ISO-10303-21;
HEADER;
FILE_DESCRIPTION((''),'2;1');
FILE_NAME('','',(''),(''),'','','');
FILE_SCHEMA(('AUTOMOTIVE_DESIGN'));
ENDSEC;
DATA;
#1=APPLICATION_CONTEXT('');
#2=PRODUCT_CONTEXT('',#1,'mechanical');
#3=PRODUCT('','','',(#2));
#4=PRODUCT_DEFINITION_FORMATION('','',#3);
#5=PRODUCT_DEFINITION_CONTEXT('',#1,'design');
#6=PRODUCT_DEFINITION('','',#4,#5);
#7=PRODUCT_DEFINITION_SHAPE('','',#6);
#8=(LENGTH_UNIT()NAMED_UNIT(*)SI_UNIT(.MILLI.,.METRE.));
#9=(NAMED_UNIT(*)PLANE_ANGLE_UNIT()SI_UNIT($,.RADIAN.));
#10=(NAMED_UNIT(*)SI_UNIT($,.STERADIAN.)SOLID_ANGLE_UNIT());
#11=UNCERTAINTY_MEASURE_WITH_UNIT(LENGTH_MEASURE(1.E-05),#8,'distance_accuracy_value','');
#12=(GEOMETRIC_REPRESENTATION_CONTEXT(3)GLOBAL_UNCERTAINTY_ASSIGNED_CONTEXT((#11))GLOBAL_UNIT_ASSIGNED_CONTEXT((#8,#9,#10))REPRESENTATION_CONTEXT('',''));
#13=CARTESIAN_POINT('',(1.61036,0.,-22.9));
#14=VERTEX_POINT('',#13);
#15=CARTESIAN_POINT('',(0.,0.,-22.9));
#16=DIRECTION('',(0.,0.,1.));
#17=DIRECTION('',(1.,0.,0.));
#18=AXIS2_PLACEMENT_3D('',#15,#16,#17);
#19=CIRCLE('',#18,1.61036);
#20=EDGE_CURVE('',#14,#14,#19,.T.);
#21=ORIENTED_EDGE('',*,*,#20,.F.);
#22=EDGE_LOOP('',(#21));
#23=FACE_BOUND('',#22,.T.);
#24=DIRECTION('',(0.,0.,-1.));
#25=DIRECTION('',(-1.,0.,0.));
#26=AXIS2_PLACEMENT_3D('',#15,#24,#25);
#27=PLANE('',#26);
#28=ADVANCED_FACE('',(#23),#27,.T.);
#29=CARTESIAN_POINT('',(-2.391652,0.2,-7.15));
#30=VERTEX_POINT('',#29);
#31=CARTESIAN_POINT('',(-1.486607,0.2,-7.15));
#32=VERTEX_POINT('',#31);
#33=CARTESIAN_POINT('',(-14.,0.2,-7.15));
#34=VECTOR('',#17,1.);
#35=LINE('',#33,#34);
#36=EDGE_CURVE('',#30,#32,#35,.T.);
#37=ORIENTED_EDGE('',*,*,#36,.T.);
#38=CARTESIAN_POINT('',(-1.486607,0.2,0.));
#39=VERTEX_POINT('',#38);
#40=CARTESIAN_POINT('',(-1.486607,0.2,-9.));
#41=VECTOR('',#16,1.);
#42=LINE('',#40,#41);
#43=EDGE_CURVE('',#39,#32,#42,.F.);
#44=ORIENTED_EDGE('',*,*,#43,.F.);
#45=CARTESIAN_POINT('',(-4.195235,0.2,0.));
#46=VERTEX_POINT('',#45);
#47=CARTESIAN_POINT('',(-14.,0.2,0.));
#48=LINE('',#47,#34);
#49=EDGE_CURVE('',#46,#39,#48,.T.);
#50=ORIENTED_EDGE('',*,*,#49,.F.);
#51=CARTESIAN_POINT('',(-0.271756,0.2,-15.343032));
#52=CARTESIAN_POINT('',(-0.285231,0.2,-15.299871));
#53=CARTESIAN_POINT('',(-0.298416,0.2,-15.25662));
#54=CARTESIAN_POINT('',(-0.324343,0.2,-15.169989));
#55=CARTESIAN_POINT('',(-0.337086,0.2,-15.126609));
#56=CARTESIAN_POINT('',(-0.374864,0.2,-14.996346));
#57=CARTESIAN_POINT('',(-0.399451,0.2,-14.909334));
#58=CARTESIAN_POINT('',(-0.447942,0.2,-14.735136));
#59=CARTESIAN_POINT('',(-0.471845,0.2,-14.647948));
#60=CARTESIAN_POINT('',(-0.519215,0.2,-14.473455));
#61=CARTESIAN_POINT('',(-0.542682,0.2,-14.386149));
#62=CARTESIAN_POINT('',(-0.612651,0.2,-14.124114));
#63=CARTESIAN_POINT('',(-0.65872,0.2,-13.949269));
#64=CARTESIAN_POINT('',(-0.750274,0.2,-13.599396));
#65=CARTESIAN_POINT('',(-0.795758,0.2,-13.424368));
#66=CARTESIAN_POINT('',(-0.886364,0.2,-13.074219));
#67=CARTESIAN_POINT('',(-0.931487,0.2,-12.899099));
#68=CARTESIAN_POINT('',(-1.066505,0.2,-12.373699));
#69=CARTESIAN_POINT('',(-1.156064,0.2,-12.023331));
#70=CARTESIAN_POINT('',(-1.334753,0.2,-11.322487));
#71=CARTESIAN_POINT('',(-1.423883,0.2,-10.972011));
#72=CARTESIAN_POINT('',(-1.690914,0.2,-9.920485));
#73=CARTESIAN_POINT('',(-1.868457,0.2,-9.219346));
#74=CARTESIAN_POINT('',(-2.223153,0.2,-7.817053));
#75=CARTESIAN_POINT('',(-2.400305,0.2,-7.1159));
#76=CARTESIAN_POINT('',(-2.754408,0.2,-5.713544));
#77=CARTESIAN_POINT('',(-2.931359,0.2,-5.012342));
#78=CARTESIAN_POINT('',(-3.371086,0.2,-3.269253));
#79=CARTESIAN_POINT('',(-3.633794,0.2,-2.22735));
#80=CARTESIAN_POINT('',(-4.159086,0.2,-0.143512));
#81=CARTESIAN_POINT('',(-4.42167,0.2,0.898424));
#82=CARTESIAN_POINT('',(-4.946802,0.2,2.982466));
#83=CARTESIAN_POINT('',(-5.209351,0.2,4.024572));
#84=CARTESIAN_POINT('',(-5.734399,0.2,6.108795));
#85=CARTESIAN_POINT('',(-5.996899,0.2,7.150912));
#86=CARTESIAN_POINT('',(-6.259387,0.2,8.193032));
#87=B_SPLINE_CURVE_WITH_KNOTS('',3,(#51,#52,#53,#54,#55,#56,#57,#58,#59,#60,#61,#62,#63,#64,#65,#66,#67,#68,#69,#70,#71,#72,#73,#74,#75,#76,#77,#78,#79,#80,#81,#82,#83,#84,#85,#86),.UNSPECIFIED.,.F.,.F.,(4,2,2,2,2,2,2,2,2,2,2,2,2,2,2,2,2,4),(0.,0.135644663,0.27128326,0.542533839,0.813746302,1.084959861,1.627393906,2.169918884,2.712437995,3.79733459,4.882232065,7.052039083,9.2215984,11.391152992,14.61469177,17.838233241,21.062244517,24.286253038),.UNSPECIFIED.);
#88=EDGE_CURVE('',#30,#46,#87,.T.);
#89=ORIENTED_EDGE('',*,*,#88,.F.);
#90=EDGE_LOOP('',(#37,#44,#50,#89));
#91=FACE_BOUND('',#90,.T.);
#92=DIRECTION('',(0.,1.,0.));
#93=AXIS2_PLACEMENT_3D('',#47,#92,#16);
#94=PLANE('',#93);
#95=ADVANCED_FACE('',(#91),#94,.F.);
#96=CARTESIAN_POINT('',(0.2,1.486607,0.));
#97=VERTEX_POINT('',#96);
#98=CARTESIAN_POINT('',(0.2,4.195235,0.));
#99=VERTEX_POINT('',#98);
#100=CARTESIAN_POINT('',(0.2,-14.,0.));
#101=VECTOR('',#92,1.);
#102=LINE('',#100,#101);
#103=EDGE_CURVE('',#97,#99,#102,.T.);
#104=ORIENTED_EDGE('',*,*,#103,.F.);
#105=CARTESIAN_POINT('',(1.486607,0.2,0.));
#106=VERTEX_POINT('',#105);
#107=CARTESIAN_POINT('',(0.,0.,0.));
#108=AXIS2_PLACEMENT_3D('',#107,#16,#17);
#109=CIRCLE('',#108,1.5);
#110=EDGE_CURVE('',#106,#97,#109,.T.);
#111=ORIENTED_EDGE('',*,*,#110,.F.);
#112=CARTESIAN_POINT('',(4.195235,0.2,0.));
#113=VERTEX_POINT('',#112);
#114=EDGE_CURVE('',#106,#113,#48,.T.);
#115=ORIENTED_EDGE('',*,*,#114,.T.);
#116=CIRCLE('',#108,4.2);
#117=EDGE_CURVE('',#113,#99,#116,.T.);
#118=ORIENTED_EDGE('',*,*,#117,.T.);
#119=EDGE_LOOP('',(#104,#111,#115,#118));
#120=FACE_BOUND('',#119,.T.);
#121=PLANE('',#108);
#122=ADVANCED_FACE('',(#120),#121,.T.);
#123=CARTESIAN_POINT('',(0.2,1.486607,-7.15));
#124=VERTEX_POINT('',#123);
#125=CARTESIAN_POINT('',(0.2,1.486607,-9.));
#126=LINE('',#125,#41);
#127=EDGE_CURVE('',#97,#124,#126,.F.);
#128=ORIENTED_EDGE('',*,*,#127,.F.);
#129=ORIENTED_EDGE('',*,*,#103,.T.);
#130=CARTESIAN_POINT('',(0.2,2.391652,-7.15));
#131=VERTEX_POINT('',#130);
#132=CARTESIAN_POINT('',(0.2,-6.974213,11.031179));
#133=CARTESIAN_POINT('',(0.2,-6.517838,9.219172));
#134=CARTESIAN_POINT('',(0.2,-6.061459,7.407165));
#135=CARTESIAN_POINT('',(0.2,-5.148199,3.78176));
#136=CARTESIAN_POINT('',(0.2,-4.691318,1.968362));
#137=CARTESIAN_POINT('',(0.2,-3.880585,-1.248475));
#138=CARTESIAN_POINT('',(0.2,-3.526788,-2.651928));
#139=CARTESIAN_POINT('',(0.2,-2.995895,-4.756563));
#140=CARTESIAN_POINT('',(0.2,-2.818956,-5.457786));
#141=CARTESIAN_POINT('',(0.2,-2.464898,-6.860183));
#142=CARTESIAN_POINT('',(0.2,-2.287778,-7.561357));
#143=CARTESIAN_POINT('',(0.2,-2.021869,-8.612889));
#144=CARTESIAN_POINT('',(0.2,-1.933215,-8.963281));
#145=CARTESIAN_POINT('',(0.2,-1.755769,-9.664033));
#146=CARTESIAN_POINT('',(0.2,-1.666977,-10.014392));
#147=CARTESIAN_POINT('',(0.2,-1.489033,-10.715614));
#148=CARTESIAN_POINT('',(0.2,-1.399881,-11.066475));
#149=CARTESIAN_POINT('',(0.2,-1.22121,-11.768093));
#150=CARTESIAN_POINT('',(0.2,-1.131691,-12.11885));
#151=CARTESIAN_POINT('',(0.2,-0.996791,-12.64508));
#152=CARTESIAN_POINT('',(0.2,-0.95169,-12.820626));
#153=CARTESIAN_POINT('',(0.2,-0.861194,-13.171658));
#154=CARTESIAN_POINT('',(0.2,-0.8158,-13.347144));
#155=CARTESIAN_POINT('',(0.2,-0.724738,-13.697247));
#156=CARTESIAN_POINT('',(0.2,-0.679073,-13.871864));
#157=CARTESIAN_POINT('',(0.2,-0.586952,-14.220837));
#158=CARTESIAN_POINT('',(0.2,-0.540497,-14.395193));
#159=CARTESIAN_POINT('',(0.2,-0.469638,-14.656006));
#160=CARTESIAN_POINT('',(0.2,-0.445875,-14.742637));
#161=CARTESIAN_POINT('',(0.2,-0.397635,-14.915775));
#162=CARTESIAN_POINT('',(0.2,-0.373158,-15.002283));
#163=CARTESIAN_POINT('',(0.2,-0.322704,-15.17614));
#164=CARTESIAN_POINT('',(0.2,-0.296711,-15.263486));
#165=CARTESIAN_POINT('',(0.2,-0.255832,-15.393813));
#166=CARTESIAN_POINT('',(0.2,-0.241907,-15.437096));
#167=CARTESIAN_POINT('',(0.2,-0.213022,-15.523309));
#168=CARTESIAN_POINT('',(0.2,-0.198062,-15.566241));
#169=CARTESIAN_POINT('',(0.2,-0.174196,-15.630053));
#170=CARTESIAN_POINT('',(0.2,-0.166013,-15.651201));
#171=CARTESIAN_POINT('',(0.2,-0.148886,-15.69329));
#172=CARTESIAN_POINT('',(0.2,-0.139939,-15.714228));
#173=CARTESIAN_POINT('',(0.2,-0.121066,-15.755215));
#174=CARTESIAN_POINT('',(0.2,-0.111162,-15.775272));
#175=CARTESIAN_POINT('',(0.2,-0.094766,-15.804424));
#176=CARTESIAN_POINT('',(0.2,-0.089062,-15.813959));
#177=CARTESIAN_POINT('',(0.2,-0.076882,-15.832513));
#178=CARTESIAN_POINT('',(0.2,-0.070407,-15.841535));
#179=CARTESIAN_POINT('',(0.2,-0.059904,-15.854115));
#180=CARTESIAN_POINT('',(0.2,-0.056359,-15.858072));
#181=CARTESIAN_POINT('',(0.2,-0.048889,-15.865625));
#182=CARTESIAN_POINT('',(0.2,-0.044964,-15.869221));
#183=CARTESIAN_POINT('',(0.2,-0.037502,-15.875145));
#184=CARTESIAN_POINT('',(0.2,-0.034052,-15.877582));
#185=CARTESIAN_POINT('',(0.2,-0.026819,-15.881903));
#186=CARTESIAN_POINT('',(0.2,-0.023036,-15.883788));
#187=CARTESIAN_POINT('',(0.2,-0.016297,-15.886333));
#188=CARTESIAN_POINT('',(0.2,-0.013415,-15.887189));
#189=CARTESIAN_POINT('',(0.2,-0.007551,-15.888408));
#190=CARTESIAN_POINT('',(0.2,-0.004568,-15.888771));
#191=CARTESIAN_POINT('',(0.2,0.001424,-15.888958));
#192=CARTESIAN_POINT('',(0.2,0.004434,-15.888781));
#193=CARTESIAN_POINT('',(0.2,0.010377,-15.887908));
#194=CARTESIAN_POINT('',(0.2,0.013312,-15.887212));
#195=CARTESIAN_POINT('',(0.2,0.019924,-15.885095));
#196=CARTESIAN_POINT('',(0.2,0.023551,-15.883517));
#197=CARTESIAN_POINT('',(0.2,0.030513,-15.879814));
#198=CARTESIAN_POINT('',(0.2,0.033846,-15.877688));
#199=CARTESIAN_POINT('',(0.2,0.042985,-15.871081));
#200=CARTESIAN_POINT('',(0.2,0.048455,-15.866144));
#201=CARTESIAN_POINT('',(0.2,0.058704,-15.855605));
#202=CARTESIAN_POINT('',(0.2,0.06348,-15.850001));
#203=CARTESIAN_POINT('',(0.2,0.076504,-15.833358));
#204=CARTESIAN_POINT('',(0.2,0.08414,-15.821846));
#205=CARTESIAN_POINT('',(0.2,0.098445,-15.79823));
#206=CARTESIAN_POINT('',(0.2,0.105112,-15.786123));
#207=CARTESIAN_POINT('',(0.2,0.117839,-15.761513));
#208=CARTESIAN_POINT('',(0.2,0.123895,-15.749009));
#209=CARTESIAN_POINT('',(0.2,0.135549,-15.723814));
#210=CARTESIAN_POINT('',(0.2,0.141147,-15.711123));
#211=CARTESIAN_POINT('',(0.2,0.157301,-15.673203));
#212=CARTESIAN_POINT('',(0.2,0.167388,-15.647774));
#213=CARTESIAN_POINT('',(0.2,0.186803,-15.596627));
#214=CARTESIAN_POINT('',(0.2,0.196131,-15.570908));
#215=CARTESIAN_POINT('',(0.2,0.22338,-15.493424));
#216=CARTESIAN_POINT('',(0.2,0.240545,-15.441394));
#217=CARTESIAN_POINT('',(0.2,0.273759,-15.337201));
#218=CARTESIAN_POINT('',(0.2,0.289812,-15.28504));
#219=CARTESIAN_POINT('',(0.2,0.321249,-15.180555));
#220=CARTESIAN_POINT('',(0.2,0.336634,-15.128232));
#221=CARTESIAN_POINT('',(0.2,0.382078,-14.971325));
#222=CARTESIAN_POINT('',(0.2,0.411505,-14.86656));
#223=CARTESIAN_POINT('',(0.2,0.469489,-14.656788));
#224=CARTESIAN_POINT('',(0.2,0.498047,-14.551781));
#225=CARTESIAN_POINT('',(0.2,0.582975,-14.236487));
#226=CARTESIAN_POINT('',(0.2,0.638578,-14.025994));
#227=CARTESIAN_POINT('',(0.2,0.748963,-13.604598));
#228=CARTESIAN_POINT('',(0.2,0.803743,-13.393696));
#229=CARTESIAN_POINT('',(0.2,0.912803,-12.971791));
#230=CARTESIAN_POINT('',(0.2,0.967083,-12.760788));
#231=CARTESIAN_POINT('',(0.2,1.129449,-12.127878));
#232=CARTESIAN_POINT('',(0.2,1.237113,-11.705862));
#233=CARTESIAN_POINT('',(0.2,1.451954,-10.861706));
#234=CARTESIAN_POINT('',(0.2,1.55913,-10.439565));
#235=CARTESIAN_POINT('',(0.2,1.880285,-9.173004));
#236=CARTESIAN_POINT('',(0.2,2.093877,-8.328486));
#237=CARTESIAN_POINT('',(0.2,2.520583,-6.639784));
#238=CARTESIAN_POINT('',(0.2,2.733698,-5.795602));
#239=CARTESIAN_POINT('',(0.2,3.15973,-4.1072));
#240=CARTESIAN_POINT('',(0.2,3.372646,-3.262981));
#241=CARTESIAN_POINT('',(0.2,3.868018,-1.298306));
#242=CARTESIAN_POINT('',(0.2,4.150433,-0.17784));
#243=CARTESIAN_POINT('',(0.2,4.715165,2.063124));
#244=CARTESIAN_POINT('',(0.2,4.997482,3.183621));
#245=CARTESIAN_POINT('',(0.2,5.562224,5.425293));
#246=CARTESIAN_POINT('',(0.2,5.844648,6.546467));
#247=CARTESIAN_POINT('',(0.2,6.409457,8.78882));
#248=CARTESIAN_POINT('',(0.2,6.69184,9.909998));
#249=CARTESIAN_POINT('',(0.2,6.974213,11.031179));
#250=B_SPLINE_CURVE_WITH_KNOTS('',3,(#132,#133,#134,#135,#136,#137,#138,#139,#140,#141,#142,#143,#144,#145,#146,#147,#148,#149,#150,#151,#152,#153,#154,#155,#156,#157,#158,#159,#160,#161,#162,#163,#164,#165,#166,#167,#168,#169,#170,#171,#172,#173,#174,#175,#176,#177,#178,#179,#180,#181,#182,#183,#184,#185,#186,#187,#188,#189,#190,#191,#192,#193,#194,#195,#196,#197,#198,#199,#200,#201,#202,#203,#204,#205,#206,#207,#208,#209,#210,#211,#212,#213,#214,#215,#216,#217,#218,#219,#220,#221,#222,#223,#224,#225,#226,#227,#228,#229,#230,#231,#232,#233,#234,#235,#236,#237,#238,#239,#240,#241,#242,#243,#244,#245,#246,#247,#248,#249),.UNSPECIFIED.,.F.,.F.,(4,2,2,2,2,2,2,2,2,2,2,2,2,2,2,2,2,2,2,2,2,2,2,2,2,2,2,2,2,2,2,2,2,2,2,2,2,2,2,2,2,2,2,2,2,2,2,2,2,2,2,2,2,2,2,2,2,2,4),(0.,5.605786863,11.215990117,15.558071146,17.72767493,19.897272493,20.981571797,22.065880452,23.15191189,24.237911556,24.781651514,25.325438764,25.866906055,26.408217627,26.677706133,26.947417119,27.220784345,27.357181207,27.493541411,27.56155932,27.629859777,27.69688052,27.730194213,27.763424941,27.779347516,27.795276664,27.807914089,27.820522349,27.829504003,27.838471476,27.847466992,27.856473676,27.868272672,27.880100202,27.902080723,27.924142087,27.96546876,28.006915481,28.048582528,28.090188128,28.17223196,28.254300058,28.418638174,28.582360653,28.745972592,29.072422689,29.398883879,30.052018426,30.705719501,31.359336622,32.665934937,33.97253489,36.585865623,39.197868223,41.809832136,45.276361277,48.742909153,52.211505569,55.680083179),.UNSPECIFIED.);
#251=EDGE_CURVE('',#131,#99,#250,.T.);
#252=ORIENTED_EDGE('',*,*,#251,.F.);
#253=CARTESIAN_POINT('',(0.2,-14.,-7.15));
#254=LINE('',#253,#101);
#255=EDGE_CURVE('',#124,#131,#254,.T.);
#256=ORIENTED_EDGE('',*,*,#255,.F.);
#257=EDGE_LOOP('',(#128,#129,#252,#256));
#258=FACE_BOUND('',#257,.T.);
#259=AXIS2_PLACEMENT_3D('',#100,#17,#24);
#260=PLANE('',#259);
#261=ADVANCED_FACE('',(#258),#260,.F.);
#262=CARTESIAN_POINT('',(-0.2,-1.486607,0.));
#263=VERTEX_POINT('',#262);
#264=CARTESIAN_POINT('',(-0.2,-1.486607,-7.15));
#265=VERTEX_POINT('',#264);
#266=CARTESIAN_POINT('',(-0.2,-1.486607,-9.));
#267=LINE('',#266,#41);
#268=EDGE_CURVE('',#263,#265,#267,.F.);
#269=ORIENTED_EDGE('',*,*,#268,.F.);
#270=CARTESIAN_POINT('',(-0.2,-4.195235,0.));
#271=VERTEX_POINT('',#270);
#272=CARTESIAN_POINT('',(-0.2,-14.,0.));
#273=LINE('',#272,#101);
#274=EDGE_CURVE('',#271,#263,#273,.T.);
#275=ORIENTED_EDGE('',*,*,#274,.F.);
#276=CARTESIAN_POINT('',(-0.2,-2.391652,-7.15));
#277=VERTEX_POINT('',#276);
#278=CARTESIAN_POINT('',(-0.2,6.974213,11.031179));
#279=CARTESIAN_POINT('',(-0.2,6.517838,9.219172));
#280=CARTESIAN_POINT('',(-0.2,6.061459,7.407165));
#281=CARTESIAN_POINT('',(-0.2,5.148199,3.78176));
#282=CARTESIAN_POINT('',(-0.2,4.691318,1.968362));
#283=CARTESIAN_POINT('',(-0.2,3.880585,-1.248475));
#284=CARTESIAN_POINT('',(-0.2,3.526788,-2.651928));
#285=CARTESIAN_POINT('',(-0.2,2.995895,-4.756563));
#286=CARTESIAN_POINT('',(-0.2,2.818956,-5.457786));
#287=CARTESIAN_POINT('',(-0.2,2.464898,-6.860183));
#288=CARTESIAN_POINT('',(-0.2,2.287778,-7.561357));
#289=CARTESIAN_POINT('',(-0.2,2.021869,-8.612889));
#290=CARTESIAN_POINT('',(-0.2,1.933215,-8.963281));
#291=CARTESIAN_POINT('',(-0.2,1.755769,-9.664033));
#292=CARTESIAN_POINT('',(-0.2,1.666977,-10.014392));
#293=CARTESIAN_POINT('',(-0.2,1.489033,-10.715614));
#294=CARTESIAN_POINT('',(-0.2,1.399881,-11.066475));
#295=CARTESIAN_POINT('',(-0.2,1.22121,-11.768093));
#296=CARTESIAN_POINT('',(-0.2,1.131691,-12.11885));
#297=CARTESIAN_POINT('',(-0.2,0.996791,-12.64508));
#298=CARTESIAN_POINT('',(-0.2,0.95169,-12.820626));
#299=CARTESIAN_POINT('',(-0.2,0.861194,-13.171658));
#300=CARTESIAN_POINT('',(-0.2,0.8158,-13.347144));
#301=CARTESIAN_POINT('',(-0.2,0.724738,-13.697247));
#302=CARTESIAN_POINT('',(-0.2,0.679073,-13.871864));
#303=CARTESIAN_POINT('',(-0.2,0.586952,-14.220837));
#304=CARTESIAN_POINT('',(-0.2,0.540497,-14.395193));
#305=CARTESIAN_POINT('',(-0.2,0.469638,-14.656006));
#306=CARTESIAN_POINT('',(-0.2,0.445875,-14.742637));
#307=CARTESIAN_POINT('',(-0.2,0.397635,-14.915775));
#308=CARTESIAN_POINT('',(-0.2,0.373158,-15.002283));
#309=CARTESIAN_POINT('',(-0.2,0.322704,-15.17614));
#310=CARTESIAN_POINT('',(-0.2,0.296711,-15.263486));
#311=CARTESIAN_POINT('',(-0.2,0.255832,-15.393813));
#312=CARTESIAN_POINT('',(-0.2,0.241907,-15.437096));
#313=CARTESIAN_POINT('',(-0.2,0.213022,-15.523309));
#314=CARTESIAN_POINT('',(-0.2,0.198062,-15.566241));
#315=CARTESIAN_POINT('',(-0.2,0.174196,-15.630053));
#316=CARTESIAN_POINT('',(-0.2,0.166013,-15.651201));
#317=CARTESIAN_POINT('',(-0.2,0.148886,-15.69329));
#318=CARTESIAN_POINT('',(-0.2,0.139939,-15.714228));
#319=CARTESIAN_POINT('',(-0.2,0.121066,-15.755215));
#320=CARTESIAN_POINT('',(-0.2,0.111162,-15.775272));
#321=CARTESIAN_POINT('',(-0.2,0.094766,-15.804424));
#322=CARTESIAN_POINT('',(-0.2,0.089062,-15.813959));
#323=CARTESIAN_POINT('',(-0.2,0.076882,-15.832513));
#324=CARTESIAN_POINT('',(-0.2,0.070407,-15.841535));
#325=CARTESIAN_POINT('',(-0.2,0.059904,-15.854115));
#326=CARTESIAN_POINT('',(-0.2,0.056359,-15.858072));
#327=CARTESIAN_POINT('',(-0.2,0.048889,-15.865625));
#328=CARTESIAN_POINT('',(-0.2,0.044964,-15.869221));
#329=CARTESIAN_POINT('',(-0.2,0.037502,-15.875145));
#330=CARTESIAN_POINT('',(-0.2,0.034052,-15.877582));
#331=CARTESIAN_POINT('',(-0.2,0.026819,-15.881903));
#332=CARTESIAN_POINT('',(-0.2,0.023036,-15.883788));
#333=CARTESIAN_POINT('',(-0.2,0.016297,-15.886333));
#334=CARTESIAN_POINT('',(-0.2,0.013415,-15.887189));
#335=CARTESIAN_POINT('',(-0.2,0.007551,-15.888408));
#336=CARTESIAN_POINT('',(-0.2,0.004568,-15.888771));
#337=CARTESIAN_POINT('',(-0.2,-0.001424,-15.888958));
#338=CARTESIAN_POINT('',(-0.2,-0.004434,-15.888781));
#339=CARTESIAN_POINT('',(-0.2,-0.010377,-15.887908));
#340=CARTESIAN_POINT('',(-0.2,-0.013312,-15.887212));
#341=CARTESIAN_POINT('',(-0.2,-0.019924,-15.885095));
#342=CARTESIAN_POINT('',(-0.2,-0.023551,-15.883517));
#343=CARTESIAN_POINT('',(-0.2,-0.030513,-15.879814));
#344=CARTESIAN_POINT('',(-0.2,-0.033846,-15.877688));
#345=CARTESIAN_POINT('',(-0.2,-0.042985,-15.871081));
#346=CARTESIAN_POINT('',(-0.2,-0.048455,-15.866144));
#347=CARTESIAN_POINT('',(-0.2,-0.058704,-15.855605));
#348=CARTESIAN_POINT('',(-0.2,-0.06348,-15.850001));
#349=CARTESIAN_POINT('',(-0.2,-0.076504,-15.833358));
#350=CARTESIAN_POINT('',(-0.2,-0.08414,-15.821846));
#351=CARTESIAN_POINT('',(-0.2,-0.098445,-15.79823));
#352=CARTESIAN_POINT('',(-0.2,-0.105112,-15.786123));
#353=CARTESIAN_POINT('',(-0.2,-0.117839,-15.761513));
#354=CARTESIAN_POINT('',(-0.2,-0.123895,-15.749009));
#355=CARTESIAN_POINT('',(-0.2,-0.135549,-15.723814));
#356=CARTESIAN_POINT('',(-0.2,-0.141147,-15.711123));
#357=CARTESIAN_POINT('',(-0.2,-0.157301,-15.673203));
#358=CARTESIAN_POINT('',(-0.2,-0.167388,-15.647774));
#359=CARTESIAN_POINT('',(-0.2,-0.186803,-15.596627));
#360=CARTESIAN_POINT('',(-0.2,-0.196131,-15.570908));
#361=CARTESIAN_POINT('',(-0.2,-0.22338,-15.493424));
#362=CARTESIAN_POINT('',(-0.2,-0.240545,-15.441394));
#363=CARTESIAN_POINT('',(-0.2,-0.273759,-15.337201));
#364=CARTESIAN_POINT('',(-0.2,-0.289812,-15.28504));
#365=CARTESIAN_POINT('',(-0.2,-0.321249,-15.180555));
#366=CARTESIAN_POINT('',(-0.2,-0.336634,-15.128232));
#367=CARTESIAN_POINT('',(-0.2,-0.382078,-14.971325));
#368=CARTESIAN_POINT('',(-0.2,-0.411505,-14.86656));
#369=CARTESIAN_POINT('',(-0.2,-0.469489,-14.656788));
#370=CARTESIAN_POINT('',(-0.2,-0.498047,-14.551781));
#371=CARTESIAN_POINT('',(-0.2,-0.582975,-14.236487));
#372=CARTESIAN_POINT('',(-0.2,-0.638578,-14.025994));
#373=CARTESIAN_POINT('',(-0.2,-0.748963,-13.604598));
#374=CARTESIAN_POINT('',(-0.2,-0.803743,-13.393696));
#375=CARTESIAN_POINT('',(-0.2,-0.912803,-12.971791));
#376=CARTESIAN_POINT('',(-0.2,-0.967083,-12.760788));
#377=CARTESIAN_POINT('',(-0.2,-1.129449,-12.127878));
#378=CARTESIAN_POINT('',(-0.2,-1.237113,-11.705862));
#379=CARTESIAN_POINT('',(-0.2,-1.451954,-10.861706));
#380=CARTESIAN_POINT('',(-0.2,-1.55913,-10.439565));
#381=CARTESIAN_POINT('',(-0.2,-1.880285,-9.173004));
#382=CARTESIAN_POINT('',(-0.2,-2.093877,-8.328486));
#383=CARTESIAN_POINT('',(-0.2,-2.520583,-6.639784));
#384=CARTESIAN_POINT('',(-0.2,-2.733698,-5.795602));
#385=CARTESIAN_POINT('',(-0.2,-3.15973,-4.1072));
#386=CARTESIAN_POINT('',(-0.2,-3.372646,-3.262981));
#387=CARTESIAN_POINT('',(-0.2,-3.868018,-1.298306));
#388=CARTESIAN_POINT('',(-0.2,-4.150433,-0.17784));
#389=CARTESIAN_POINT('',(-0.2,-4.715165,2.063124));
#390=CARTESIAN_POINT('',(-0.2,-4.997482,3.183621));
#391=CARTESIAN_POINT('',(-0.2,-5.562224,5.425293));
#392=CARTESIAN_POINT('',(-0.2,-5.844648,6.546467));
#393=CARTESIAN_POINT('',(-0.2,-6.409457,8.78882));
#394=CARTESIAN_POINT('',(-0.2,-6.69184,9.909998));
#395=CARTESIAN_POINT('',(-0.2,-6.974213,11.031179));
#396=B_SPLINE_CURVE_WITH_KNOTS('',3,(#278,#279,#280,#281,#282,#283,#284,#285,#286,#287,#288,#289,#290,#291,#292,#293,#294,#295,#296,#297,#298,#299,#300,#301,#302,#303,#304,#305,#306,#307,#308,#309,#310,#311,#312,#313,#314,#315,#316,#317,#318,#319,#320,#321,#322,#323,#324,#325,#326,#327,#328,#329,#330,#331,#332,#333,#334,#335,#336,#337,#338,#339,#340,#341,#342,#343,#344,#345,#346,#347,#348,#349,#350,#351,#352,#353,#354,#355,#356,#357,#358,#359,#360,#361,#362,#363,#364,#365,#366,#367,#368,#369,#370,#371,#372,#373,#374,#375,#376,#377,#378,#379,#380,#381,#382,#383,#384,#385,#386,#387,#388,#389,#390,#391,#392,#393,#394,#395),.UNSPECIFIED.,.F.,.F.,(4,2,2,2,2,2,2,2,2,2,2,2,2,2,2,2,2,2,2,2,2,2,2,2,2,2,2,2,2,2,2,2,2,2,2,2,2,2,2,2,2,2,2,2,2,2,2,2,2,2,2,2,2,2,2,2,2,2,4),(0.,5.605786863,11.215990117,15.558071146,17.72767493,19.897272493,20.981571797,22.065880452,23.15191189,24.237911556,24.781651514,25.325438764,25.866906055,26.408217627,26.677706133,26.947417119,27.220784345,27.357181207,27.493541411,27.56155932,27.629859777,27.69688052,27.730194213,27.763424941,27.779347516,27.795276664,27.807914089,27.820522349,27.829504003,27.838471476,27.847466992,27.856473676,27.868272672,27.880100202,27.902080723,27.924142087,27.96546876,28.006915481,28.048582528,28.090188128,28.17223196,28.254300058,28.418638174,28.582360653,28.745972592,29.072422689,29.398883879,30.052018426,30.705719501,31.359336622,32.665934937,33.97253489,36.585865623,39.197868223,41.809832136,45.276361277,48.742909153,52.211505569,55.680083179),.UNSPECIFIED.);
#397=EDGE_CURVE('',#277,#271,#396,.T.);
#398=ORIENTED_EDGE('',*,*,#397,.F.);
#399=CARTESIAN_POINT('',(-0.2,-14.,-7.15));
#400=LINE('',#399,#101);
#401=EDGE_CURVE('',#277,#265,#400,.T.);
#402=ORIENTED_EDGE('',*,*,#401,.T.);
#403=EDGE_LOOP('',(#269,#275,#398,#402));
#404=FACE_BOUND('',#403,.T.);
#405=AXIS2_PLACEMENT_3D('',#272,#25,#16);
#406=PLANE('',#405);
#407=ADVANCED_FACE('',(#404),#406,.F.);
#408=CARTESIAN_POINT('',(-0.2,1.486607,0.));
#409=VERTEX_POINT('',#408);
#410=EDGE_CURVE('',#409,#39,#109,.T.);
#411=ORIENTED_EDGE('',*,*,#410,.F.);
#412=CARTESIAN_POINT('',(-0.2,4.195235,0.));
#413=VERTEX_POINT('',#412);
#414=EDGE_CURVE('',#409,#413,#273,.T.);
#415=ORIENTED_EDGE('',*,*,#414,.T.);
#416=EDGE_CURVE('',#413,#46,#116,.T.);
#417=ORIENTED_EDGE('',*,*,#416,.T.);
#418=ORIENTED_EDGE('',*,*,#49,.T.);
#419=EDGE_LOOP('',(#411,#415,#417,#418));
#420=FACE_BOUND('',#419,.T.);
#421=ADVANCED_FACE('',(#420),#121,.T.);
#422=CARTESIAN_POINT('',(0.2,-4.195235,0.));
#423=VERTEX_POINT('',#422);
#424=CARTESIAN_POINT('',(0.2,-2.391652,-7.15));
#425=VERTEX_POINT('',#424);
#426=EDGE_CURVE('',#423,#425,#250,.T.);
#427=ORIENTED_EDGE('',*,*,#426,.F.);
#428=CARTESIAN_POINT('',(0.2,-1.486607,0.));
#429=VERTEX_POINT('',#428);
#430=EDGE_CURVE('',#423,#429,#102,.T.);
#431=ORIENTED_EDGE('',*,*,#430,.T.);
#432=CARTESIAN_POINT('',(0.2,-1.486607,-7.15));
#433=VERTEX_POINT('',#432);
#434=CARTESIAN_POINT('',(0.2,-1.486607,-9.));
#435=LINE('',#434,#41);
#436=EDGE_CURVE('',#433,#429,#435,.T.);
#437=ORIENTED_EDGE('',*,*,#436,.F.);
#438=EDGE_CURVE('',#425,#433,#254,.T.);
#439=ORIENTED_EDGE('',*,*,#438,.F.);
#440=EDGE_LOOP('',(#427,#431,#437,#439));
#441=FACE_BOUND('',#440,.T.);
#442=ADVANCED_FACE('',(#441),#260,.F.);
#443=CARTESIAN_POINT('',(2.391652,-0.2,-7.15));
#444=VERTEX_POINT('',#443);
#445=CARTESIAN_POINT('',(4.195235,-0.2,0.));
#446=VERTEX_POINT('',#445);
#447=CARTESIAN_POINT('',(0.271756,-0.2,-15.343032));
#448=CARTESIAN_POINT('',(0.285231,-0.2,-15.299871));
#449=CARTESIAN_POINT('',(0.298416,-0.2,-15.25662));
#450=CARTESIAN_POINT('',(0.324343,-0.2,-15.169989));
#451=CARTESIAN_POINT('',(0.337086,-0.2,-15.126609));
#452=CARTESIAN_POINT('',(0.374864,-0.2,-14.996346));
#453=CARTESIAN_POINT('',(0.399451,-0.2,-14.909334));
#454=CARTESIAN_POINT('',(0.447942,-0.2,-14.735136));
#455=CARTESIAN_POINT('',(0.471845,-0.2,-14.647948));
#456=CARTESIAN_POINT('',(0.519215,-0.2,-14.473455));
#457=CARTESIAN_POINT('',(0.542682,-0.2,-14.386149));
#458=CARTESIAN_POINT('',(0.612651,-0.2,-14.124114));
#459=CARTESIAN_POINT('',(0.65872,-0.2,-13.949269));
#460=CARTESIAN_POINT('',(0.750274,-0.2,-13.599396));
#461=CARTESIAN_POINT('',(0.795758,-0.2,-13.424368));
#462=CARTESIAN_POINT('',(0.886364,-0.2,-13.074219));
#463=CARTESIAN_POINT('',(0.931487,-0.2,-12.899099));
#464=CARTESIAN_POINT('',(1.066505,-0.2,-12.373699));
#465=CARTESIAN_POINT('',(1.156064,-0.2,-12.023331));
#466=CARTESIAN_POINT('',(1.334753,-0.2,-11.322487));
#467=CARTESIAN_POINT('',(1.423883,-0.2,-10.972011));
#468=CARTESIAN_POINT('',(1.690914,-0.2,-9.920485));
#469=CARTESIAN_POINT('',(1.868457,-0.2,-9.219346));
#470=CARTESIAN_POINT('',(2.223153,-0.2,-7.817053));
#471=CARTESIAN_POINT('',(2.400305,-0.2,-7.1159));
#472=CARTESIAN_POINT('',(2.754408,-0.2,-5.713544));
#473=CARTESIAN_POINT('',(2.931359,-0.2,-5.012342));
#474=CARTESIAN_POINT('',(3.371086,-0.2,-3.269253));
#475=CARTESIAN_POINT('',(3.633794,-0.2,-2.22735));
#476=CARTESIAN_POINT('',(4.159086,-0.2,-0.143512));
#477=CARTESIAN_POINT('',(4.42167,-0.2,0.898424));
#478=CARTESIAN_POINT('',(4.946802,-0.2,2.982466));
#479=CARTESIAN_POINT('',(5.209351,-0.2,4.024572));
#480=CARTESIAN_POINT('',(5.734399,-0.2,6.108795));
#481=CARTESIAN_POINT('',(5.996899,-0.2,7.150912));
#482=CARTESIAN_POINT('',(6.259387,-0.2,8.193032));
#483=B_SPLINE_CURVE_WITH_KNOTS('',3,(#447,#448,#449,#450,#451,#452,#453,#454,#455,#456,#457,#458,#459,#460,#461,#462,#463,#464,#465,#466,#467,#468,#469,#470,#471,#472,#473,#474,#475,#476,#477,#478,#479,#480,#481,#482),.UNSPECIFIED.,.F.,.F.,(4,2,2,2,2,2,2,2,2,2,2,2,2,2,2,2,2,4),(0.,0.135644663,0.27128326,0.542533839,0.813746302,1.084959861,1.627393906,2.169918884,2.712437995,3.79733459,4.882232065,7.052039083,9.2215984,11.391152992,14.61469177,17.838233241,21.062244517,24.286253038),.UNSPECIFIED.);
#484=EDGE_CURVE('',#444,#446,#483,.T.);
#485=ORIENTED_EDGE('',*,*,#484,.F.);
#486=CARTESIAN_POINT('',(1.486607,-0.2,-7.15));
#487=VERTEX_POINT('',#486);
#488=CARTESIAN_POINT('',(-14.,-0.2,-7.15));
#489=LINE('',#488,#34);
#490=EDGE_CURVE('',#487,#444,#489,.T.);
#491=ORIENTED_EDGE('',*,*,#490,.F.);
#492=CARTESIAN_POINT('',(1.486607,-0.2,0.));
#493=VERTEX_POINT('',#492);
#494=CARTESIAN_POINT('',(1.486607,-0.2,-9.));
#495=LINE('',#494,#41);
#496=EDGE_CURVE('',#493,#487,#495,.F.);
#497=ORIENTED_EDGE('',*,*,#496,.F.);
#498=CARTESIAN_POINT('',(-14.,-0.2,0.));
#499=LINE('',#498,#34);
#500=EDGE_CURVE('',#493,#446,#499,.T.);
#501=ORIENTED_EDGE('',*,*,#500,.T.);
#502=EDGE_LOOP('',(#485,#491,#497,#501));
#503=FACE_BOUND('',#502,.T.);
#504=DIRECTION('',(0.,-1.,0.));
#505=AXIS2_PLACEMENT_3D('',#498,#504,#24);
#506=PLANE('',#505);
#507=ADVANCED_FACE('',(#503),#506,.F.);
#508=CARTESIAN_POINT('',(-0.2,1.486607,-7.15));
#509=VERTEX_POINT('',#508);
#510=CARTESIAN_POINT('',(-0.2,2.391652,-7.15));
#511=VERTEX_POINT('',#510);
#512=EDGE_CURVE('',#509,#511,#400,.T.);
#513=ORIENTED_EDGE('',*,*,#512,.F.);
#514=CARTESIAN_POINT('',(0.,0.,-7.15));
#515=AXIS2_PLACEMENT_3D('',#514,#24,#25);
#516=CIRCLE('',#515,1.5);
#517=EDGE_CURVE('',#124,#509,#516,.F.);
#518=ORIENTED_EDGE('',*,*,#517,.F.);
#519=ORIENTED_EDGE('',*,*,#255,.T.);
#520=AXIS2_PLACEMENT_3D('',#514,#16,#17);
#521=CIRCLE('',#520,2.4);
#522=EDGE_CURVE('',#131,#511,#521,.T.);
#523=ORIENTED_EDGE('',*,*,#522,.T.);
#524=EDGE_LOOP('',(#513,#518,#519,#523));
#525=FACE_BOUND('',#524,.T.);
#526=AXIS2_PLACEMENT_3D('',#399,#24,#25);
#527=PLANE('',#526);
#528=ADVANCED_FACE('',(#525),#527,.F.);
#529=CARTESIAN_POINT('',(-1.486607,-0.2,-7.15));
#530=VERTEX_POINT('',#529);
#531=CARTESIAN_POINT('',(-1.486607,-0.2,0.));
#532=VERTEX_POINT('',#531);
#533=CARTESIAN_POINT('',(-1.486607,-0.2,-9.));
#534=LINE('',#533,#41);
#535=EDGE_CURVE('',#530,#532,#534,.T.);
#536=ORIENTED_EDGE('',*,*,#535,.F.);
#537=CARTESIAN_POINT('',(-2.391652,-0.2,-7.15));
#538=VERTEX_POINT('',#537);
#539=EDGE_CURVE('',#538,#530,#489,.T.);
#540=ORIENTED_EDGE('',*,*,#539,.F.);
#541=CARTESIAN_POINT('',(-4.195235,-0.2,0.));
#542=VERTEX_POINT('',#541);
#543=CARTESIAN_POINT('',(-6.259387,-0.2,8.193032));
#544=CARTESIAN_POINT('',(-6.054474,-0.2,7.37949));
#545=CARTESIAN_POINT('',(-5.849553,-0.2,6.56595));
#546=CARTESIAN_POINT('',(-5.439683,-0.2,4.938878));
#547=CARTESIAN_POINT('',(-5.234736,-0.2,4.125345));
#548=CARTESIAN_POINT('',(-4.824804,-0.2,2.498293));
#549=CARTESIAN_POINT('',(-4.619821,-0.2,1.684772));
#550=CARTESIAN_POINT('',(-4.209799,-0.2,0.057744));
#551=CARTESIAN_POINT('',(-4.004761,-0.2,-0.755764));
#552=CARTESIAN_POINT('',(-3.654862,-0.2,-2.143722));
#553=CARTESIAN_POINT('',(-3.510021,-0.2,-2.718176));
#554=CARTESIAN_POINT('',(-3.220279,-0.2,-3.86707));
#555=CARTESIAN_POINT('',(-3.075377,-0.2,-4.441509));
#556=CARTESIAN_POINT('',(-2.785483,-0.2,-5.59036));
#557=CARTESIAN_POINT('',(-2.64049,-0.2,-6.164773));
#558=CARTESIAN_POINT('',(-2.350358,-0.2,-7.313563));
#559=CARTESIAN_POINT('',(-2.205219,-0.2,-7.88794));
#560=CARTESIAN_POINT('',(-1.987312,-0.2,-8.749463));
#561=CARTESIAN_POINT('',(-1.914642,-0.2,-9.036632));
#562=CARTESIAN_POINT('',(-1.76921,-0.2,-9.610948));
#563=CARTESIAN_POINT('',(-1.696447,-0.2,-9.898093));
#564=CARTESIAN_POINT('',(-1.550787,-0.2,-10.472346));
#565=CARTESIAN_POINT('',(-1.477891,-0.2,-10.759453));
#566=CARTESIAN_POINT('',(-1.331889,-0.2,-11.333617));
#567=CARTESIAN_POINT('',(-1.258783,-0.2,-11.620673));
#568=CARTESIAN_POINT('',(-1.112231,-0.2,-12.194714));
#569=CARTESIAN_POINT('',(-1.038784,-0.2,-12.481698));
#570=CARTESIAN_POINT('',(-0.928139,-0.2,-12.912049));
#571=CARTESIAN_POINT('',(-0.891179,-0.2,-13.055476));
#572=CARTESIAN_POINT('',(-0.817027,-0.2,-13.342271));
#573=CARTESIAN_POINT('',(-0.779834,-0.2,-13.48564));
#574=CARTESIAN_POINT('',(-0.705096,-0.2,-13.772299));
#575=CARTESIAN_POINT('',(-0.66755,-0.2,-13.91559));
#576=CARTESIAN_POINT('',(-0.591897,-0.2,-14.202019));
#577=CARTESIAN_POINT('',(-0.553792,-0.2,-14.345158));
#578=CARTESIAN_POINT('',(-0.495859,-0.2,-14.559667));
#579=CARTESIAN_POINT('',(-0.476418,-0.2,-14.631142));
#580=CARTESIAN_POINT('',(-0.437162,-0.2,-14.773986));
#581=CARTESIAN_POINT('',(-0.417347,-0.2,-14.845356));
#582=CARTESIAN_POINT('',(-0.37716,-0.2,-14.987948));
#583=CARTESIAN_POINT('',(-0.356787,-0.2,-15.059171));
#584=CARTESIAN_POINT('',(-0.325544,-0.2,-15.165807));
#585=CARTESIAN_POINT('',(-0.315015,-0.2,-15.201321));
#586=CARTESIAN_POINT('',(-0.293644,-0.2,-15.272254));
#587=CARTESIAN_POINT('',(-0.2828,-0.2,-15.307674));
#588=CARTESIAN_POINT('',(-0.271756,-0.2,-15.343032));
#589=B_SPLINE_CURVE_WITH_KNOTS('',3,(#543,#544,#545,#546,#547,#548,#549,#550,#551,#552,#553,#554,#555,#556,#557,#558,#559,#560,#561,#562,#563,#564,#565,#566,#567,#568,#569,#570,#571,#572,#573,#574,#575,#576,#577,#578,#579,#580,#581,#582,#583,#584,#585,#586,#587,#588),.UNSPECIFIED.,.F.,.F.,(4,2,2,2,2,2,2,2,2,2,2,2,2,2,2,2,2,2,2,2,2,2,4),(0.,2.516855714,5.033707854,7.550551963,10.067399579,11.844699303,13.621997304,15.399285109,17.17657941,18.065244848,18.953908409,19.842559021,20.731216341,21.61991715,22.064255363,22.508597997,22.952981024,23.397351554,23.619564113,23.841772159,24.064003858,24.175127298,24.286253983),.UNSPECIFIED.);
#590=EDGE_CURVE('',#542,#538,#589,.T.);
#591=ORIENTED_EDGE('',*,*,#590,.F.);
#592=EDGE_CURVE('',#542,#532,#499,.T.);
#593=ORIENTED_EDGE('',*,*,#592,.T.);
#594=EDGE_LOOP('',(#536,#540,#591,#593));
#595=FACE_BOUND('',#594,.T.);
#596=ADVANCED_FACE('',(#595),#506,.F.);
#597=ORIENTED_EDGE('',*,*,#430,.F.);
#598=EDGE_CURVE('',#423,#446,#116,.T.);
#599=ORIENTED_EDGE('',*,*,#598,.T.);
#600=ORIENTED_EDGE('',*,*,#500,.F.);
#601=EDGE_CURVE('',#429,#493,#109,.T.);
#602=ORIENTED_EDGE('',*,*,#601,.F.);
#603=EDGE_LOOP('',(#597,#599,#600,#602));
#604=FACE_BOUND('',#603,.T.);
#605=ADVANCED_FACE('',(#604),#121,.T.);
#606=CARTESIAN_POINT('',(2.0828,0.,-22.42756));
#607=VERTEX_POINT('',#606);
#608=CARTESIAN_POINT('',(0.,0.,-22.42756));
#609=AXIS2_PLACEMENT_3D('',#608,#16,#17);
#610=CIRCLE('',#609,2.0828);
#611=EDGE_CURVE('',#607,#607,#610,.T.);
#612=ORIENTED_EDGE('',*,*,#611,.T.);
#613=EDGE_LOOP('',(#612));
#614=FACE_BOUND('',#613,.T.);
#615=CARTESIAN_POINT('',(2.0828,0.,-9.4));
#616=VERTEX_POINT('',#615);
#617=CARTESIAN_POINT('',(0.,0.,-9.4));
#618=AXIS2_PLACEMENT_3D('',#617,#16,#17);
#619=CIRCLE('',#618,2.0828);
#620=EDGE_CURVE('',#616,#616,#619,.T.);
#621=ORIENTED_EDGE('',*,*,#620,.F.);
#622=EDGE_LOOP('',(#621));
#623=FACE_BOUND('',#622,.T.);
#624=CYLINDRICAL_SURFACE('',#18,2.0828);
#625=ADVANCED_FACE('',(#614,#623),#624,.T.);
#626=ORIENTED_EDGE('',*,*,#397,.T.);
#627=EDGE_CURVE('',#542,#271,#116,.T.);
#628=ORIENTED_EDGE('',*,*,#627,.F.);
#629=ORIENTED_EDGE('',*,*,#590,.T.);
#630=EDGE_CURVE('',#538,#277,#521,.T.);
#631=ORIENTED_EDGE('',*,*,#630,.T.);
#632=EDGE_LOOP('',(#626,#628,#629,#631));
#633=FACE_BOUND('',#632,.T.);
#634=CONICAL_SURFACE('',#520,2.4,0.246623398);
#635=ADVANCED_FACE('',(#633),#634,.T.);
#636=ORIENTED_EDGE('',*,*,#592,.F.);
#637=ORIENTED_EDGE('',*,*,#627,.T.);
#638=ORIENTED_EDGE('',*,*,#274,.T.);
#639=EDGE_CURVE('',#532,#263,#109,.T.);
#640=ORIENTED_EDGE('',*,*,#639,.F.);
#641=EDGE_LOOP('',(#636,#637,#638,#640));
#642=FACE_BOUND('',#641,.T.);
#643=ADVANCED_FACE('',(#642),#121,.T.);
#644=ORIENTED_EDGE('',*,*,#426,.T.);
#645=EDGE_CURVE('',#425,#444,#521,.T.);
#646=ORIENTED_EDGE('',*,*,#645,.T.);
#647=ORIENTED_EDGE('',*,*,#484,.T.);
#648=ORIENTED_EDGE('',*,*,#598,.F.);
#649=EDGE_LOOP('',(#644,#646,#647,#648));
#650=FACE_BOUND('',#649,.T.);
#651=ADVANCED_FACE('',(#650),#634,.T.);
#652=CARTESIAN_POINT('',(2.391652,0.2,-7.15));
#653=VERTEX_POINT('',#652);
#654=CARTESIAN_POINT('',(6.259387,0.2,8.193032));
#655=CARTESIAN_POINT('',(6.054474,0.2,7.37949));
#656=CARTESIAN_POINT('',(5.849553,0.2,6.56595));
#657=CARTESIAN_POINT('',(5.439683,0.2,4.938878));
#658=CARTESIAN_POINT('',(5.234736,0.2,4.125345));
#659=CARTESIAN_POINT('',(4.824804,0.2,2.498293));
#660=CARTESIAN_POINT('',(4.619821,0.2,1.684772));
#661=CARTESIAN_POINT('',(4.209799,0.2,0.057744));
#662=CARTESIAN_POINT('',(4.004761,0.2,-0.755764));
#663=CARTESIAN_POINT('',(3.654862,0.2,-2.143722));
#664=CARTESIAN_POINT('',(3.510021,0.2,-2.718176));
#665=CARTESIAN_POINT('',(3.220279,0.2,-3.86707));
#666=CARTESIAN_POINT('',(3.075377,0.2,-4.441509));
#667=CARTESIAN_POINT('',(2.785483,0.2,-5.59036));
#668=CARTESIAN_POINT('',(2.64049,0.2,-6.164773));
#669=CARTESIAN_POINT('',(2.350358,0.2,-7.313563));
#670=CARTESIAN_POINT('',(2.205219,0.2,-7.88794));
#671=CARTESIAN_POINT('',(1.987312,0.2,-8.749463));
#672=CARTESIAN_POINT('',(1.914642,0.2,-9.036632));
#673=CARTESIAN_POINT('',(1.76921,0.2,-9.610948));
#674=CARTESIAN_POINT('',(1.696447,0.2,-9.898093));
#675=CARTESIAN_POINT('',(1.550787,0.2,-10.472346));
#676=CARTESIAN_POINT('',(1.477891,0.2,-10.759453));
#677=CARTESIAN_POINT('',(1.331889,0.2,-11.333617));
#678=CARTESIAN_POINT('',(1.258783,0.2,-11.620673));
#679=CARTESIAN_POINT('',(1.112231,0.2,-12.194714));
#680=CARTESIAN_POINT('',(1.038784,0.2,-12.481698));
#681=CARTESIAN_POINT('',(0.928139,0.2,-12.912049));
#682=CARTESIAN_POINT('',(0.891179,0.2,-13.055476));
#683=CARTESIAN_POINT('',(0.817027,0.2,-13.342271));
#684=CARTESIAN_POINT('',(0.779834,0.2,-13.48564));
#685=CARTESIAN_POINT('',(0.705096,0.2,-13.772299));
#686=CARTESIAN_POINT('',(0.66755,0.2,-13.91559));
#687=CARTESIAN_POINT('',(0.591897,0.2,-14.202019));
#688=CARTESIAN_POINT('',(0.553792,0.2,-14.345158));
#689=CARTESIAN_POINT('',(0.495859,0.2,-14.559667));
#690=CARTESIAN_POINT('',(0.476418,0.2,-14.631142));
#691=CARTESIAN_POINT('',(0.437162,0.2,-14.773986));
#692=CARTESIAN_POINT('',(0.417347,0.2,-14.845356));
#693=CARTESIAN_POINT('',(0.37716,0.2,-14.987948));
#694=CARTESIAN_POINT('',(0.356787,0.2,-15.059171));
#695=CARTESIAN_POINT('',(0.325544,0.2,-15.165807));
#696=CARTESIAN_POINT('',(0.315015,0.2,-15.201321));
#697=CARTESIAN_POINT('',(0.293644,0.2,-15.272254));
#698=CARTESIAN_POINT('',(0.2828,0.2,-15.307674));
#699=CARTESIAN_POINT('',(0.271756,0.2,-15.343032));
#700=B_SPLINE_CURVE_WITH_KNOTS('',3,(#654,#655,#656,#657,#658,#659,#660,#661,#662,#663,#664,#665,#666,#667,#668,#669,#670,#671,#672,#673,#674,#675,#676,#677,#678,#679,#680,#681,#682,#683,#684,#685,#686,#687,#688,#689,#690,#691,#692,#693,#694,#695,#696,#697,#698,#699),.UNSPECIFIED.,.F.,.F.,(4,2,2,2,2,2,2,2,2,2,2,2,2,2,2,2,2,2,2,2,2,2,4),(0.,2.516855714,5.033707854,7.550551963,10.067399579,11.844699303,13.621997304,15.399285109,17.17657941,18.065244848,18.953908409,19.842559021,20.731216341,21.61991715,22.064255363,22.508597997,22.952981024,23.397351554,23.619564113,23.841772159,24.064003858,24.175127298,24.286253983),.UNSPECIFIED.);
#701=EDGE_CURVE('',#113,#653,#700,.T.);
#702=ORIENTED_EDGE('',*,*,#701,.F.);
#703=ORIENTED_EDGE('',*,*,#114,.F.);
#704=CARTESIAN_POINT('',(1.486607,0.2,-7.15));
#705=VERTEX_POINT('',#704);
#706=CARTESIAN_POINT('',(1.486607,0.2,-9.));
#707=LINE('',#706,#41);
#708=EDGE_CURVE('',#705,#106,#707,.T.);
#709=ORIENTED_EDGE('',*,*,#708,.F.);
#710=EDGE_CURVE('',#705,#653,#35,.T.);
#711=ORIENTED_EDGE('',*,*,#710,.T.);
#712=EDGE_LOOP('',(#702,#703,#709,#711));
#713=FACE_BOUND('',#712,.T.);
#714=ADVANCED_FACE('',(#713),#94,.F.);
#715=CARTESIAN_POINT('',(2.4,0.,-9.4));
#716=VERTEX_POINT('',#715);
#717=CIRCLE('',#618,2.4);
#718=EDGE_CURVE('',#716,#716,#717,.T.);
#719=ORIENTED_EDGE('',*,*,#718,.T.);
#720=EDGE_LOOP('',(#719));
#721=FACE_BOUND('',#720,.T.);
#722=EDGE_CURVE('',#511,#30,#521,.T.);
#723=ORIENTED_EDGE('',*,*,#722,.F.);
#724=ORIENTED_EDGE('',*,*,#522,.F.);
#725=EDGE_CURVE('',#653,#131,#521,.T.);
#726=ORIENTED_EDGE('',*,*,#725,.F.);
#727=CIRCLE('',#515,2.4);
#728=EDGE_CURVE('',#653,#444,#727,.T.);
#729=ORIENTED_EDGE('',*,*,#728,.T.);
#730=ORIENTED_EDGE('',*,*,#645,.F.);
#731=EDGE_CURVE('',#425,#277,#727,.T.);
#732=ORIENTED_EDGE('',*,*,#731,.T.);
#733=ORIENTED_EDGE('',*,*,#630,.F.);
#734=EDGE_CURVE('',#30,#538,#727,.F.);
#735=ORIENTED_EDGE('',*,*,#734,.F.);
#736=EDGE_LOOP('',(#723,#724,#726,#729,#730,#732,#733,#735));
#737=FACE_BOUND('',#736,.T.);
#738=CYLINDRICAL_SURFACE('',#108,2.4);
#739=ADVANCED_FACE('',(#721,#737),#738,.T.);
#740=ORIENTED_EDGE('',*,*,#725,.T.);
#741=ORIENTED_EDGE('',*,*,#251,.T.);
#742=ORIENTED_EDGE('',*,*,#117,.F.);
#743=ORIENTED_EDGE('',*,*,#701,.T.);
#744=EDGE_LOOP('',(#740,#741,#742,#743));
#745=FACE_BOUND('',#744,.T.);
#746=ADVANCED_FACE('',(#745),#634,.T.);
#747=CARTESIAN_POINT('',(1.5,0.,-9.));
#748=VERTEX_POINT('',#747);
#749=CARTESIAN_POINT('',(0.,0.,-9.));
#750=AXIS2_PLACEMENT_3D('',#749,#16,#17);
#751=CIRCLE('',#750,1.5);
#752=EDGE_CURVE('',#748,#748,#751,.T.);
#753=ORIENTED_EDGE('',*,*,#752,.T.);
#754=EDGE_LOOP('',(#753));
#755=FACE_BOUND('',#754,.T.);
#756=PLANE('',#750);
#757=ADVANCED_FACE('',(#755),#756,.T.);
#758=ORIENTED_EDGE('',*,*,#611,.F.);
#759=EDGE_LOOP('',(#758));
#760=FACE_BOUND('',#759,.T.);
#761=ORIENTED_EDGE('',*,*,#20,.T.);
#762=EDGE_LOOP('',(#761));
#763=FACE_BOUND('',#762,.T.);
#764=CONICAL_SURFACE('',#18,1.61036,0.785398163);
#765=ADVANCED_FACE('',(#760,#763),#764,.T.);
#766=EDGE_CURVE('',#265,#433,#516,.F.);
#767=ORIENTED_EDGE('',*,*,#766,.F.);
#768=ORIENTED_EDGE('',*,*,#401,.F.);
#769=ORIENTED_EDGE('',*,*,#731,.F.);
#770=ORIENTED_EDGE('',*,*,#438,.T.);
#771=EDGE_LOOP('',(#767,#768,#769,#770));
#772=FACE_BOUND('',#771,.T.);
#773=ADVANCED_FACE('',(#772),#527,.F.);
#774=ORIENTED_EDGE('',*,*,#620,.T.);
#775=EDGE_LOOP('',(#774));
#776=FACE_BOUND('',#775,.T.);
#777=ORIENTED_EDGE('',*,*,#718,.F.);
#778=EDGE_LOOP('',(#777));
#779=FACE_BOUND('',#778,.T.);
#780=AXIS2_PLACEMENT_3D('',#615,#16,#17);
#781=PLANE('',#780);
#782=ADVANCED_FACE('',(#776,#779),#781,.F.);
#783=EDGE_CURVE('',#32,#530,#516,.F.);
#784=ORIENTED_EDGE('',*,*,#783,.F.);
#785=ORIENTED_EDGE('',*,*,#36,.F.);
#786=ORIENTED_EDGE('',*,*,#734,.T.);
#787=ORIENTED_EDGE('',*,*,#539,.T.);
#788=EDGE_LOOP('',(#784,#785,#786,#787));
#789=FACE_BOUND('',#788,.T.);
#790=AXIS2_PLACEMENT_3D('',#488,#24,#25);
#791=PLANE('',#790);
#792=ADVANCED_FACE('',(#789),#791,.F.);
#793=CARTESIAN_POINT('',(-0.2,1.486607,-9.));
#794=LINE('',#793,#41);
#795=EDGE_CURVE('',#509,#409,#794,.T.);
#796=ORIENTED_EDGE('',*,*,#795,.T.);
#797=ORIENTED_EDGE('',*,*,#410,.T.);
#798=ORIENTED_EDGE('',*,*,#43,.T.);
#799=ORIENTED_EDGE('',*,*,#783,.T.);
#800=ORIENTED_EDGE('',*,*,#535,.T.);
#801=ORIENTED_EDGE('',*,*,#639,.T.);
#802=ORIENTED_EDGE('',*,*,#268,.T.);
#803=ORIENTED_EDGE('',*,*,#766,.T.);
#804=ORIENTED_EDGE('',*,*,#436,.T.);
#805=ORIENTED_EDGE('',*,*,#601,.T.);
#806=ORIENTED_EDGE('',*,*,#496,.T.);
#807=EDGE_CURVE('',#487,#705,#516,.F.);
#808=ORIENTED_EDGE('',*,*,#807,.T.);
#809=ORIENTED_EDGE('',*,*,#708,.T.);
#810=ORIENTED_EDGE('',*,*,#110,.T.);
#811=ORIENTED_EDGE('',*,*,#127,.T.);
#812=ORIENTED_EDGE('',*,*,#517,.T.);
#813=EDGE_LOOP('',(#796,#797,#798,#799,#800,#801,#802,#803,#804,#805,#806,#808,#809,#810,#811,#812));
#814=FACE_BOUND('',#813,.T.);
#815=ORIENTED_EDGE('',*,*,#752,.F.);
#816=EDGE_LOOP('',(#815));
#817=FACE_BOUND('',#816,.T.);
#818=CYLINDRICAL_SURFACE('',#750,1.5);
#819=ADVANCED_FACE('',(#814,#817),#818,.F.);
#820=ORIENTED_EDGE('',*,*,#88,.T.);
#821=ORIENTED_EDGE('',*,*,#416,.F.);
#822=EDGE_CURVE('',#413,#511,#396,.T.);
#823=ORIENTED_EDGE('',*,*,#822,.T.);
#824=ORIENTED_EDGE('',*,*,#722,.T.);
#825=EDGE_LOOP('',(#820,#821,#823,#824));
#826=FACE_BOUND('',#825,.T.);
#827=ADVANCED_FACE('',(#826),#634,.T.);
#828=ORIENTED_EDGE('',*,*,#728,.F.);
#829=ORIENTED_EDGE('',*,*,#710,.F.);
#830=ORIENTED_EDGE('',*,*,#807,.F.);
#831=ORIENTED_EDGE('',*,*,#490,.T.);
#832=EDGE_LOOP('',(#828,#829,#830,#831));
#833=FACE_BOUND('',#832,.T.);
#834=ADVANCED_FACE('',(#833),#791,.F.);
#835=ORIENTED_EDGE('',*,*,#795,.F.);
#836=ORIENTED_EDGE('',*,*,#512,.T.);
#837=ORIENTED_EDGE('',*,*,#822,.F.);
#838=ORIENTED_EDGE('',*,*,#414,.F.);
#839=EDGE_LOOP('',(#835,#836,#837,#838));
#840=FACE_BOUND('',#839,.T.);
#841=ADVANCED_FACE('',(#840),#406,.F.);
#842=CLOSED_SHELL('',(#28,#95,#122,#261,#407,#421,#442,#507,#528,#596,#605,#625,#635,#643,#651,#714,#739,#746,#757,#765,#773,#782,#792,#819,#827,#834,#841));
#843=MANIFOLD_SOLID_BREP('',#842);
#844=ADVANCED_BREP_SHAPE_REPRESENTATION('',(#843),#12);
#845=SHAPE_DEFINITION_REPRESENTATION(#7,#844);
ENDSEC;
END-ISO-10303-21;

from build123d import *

# Parameters (mm, degrees)
CROQUIS1_W                 = 2.4
CROQUIS1_H                 = 22.9
CROQUIS3_R                 = 1.5
CORTAR_EXTRUIR1_DEPTH      = 9
CORTAR_EXTRUIR2_DEPTH      = 12.7
CORTAR_EXTRUIR2_DEPTH_BACK = 14
CROQUIS5_W                 = 0.4
CROQUIS5_H                 = 7.15
CORTAR_EXTRUIR3_DEPTH      = 9.7
CORTAR_EXTRUIR3_DEPTH_BACK = 14
CROQUIS6_W                 = 7.15
CROQUIS6_H                 = 0.4


# Read off the part's stored shape, not the designer's step: #8-32 Roscas Standard Taladro2
with BuildPart() as part:
    # Croquis1 → Revolución1 (revolve)
    with BuildSketch(Plane(origin=(0, 0, 0), x_dir=(1, 0, 0), z_dir=(0, 1, 0))):
        with Locations((1.2, 11.45)):
            Rectangle(CROQUIS1_W, CROQUIS1_H)
    revolve(axis=Axis((0, 0, 0), (0, 0, -1)))

    # Croquis2 → Revolución2 (revolve)
    with BuildSketch(Plane(origin=(0, 0, 0), x_dir=(1, 0, 0), z_dir=(0, 1, 0)), mode=Mode.PRIVATE) as revoluci_n2_sk:
        Polygon((-4.2, 0), (-2.4, 0), (-2.4, 7.15), align=None)
    revolve(revoluci_n2_sk.sketch.rotate(Axis((0, 0, 0), (0, 0, -1)), 180), axis=Axis((0, 0, 0), (0, 0, -1)))

    # Croquis3 → Cortar-Extruir1 (cut)
    with BuildSketch(Plane.XY):
        Circle(CROQUIS3_R)
    extrude(amount=-CORTAR_EXTRUIR1_DEPTH, mode=Mode.SUBTRACT)

    # Croquis5 → Cortar-Extruir2 (cut, two sides: drawn at the far end of the back side and taken through both)
    with BuildSketch(Plane(origin=(0, 0, 0), x_dir=(1, 0, 0), z_dir=(0, 1, 0)).offset(-CORTAR_EXTRUIR2_DEPTH_BACK)):
        with Locations((0, 3.575)):
            Rectangle(CROQUIS5_W, CROQUIS5_H)
    extrude(amount=CORTAR_EXTRUIR2_DEPTH + CORTAR_EXTRUIR2_DEPTH_BACK, mode=Mode.SUBTRACT)

    # Croquis6 → Cortar-Extruir3 (cut, two sides: drawn at the far end of the back side and taken through both)
    with BuildSketch(Plane(origin=(0, 0, 0), x_dir=(0, 0, -1), z_dir=(1, 0, 0)).offset(-CORTAR_EXTRUIR3_DEPTH_BACK)):
        with Locations((3.575, 0)):
            Rectangle(CROQUIS6_W, CROQUIS6_H)
    extrude(amount=CORTAR_EXTRUIR3_DEPTH + CORTAR_EXTRUIR3_DEPTH_BACK, mode=Mode.SUBTRACT)

    # #8-32 Roscas Standard Taladro2 outline → #8-32 Roscas Standard Taladro2 (revolve, cut)
    with BuildSketch(Plane.XZ):
        Polygon((1.61036, -22.9), (2.4, -22.9), (2.4, -9.4), (2.0828, -9.4), (2.0828, -22.42756), align=None)
    revolve(axis=Axis((0, 0, 0), (0, 0, 1)), mode=Mode.SUBTRACT)


solid = part.part
